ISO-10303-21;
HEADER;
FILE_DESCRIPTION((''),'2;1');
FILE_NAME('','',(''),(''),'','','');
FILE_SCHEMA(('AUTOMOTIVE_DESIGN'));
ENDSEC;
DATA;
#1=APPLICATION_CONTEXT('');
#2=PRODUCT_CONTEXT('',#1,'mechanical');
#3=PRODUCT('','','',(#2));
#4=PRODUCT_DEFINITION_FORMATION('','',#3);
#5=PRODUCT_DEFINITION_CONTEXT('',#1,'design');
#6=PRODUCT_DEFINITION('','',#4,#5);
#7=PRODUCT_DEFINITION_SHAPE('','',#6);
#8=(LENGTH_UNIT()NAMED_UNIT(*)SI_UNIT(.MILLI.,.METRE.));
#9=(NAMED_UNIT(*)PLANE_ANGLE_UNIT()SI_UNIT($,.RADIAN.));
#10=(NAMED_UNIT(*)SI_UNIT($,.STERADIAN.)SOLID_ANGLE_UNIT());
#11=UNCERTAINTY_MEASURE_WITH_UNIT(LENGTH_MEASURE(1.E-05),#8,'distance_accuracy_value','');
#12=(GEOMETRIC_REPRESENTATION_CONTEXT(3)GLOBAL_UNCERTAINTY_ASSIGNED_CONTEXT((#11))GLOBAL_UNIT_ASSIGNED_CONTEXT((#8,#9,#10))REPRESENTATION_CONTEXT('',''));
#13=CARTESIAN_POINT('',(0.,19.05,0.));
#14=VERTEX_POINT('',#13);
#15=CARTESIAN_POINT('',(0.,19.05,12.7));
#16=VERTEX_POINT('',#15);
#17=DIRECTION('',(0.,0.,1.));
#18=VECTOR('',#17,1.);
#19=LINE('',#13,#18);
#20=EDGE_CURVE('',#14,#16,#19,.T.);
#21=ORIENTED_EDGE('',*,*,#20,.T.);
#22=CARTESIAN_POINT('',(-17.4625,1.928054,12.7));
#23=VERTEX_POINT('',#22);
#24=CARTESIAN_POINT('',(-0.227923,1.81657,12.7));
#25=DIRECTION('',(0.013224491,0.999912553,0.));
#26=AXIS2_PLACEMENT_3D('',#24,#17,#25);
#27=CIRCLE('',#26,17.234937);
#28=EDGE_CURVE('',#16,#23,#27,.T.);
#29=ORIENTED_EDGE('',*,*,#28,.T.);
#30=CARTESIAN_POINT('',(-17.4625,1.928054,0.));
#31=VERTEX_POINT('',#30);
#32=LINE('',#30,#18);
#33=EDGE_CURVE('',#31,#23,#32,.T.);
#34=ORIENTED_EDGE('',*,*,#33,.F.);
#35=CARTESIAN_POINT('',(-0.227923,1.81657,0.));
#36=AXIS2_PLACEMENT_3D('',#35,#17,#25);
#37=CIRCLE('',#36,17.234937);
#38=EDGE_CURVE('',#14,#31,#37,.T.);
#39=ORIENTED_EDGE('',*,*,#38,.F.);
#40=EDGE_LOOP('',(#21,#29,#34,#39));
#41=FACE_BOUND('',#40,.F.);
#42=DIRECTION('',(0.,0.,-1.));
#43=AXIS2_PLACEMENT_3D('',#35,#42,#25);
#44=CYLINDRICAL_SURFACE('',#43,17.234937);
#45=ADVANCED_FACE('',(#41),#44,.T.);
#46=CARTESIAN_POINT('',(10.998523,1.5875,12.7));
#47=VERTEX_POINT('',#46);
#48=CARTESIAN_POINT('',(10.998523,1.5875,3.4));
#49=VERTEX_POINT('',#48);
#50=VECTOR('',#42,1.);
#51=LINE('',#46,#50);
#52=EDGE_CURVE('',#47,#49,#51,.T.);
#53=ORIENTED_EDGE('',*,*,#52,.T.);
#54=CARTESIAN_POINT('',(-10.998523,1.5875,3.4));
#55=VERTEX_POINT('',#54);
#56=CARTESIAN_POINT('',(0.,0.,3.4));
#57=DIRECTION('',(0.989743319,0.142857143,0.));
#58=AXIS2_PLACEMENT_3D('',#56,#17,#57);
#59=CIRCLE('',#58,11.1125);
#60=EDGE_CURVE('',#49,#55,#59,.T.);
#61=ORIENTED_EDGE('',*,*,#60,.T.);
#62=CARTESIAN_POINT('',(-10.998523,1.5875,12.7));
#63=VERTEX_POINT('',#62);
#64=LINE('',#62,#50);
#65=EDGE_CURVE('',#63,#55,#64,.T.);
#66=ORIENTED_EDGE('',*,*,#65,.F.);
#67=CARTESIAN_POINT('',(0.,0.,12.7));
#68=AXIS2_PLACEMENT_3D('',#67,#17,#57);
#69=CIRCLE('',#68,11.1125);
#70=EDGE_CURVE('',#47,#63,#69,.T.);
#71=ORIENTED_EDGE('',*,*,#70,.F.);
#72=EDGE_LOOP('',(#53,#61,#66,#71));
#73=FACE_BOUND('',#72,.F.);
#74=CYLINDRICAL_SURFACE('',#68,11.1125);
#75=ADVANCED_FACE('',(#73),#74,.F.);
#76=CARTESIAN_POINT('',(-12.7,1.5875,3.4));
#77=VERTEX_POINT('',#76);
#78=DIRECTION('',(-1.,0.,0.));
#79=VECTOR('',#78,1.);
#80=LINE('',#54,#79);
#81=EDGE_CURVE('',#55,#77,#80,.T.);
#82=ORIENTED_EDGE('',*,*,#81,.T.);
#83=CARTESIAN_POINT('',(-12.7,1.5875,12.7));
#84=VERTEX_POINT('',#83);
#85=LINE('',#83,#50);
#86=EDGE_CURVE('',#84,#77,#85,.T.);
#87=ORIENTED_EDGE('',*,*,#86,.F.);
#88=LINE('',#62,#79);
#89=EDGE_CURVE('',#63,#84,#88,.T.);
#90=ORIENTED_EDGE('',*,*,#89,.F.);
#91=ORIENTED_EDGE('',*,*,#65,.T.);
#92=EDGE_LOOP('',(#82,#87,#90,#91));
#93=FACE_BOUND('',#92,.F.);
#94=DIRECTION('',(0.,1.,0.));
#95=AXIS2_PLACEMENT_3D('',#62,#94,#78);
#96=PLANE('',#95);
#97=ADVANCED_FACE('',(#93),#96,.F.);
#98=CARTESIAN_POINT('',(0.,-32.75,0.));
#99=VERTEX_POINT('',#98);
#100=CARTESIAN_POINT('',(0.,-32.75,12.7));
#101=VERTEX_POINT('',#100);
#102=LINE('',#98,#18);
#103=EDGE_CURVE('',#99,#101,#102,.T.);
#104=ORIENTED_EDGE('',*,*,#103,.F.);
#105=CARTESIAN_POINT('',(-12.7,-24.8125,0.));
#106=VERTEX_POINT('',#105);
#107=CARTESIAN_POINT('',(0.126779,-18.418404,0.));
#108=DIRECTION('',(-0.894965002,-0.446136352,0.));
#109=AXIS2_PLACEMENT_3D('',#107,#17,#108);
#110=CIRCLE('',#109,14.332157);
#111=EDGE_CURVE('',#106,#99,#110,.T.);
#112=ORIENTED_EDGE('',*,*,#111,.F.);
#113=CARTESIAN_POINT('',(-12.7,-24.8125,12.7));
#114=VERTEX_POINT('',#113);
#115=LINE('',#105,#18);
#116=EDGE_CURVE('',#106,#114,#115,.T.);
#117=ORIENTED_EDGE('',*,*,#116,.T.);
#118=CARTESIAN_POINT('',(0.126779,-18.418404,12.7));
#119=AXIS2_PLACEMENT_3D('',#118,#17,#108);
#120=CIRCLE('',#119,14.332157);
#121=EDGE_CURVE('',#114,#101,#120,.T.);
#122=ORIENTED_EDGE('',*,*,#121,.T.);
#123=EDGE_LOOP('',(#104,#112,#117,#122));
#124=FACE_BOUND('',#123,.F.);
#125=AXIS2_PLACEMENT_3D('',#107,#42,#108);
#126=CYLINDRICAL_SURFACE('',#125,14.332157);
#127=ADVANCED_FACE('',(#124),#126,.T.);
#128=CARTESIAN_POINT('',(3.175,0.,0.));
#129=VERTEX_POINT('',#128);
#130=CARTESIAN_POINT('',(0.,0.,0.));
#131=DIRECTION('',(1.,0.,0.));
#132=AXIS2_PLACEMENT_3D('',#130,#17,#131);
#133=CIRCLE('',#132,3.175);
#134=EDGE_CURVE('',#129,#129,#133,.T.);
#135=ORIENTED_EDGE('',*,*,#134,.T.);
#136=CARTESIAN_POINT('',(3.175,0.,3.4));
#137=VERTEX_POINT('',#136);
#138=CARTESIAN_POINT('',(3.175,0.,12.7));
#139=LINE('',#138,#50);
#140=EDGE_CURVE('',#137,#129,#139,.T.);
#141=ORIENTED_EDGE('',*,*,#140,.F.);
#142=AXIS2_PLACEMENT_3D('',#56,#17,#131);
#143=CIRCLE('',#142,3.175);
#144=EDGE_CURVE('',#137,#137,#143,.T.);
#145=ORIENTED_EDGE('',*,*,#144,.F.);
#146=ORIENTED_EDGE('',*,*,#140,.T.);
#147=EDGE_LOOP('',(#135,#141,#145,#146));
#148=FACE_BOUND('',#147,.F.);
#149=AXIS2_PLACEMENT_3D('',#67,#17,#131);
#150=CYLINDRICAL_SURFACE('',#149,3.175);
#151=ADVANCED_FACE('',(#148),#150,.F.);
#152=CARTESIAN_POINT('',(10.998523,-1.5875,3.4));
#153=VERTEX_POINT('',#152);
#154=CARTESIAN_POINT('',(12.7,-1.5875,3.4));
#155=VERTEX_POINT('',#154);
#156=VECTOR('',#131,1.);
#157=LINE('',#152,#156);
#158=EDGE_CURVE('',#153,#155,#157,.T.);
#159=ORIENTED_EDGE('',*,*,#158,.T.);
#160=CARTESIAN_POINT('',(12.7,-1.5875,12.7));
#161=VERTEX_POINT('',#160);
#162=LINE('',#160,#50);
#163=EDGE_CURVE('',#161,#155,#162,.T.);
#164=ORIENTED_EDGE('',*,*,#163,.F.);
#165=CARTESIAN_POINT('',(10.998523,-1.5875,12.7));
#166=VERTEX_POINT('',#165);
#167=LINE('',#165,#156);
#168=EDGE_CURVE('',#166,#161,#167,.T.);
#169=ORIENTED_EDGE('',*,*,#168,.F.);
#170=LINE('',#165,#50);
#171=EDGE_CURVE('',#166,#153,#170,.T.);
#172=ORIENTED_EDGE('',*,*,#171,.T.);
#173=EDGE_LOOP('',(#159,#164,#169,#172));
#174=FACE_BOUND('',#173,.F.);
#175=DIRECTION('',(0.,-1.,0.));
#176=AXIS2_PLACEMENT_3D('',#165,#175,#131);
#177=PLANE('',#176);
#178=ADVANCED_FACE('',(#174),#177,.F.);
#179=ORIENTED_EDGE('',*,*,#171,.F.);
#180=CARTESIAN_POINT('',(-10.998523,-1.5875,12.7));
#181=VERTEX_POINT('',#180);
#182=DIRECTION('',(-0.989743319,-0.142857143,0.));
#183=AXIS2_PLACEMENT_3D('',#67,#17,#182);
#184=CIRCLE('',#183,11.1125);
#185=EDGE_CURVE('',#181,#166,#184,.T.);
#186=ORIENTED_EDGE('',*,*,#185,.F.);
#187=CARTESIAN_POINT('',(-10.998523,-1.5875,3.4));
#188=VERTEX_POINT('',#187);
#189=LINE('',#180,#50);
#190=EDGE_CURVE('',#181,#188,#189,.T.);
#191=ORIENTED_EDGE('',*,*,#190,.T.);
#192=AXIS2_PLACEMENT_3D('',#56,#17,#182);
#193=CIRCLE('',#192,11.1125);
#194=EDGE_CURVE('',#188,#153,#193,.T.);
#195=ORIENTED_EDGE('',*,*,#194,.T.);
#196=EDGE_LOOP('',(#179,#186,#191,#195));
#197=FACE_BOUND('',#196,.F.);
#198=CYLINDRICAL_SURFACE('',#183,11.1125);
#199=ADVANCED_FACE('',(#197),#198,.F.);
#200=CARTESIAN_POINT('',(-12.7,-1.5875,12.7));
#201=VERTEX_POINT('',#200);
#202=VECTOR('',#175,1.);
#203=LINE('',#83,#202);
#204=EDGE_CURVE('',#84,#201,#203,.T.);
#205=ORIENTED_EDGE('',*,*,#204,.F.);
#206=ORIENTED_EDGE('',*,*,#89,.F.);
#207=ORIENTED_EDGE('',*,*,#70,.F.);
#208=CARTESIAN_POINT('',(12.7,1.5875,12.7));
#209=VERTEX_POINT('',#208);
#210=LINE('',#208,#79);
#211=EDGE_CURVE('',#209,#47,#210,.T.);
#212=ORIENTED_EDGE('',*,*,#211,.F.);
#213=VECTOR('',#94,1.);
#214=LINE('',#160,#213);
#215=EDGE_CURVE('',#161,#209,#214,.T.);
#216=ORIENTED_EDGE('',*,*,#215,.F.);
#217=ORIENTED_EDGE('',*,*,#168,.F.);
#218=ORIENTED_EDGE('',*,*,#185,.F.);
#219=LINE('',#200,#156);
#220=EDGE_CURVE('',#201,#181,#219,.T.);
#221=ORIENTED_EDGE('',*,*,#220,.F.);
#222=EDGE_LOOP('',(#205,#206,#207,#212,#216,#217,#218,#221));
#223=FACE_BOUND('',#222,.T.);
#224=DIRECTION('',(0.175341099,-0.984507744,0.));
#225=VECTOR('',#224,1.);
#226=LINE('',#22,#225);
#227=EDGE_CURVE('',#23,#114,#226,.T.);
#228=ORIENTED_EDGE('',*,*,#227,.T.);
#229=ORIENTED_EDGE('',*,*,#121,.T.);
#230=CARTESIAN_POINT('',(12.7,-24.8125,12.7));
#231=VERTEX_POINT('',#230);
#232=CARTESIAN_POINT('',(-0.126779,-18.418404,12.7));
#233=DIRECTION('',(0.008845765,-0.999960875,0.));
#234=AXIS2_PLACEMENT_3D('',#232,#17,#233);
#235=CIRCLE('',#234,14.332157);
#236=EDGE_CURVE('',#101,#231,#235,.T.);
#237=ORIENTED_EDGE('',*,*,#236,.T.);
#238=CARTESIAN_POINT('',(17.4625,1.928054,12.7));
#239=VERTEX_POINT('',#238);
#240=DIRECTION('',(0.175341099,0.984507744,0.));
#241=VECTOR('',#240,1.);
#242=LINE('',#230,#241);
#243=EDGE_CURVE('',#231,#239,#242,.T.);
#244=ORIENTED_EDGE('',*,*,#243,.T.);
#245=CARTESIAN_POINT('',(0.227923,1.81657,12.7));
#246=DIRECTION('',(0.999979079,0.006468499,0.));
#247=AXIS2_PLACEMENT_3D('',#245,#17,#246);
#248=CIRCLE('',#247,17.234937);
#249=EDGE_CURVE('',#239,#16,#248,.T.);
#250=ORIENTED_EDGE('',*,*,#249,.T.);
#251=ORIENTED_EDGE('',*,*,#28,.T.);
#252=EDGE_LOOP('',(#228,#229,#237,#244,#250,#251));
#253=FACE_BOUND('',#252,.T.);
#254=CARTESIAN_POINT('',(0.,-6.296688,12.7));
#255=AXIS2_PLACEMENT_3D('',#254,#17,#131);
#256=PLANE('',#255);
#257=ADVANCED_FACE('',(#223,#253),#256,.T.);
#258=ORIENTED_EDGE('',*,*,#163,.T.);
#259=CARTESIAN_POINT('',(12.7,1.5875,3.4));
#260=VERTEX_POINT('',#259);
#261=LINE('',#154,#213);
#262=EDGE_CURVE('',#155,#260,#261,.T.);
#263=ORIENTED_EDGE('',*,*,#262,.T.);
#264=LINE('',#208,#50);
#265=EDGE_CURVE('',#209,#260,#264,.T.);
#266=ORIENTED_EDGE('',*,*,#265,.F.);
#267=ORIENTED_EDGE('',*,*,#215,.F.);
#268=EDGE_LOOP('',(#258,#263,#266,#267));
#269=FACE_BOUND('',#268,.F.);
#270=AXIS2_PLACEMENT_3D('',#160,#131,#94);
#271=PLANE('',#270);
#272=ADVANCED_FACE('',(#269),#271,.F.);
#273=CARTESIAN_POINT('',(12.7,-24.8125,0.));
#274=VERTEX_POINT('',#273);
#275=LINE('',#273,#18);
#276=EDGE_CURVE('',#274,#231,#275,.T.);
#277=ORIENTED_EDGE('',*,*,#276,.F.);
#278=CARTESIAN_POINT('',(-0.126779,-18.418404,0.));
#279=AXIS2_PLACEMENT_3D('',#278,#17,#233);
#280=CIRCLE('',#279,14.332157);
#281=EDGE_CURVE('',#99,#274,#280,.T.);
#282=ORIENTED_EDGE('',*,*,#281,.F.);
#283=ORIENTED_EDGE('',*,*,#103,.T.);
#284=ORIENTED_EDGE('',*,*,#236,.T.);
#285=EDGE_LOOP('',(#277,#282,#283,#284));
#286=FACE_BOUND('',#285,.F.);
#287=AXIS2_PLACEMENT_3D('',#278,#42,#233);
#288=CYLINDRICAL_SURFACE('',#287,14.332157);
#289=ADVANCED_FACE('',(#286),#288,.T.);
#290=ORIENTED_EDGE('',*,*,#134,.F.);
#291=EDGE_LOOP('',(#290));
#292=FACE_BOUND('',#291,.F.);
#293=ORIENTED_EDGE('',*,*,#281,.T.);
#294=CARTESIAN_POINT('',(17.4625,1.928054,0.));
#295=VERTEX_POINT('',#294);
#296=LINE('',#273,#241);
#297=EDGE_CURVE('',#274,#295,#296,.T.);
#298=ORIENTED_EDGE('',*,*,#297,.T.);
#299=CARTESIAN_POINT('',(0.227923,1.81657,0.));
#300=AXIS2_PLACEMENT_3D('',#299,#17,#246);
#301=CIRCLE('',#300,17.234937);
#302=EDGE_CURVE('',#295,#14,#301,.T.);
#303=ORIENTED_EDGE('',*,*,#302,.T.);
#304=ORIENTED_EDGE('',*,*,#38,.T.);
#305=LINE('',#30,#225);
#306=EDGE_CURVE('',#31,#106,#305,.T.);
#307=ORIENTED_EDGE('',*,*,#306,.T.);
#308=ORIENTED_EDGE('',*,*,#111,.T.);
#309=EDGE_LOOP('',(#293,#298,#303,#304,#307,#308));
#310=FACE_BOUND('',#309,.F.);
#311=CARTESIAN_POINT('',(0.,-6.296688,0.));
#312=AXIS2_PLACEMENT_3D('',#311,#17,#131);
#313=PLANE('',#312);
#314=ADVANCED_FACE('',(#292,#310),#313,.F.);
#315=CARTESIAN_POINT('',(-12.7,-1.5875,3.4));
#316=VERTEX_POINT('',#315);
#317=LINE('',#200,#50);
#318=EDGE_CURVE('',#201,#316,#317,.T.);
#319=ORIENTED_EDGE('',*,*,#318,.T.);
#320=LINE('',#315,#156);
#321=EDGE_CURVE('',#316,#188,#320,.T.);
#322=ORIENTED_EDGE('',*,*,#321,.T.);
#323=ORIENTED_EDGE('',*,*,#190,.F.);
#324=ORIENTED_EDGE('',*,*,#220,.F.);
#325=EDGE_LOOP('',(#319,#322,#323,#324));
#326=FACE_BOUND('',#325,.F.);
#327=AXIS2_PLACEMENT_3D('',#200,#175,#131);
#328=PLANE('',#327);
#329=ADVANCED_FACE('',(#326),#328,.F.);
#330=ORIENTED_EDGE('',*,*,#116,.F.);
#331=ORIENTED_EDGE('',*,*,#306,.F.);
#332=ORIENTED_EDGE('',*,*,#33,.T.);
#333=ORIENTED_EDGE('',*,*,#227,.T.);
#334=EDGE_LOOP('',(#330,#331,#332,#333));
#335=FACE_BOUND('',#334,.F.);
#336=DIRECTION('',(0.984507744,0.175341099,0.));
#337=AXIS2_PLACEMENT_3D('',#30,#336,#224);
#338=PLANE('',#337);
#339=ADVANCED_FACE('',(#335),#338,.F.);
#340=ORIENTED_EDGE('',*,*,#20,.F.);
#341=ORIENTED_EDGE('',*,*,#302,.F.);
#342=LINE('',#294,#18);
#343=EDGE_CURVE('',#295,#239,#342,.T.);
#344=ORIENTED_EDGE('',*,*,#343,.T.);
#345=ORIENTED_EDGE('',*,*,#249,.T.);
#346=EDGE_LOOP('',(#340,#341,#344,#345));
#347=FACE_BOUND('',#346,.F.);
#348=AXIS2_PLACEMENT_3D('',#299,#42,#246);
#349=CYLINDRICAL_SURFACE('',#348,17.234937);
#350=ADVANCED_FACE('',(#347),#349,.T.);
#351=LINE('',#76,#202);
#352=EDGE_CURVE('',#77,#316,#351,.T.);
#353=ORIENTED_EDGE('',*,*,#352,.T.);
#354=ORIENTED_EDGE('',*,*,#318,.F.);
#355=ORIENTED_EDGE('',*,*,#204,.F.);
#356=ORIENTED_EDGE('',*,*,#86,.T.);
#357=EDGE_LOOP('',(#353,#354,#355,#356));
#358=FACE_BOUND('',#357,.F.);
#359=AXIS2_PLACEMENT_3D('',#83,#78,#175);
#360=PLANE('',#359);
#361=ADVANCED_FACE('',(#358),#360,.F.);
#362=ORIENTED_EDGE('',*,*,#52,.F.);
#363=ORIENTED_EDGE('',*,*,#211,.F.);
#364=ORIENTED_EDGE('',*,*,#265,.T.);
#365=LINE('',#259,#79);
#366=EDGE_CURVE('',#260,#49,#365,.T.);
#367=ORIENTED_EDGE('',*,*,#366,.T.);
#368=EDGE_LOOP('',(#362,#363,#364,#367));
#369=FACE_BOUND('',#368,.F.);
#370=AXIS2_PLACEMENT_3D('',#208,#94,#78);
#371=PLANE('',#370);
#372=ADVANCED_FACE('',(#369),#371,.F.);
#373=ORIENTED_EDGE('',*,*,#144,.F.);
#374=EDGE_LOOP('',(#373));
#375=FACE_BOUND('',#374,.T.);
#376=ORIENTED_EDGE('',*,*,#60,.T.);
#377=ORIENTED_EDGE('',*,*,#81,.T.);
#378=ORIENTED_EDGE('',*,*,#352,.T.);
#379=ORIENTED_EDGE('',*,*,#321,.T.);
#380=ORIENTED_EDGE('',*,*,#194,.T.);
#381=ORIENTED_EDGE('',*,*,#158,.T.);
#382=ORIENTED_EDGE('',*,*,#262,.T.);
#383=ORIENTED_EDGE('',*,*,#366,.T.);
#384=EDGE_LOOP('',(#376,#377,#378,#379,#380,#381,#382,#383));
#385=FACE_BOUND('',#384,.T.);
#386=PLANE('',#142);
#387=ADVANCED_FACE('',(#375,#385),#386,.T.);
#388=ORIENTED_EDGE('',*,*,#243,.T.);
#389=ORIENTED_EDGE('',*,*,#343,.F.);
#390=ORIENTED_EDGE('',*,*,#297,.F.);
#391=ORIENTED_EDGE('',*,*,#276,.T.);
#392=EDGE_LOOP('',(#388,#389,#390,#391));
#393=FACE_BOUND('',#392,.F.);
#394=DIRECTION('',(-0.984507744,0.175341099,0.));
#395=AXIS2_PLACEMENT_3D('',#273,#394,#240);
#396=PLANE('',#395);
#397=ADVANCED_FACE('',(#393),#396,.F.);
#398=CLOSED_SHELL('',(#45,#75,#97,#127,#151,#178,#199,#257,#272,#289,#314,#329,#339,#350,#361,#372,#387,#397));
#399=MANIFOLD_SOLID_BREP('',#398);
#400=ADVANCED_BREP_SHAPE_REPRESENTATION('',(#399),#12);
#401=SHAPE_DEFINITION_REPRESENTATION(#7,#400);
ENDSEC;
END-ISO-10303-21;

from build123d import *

# Parameters (mm, degrees)
F1_DEPTH = 12.7
F2_R     = 3.175
F3_DEPTH = 9.3
F4_DEPTH = 25.4


# Not quite as in the source:
# - ends of sketch curves that miss each other by under 0.0002 mm in the source are joined


with BuildPart() as f1:
    # F0 (on Top) → F1 (new body)
    with BuildSketch(Plane.XY):
        with BuildLine():
            ThreePointArc((0, -32.75), (7.4692491087, -30.572048574), (12.7, -24.8125))
            Line((12.7, -24.8125), (17.4625, 1.9280540291))
            ThreePointArc((17.4625, 1.9280540291), (12.2942741687, 14.1229194267), (0, 19.05))
            ThreePointArc((0, 19.05), (-12.2942741687, 14.1229194267), (-17.4625, 1.9280540291))
            Line((-17.4625, 1.9280540291), (-12.7, -24.8125))
            ThreePointArc((-12.7, -24.8125), (-7.4692491087, -30.572048574), (0, -32.75))
        make_face()
    extrude(amount=F1_DEPTH)

    # F2 (on face) → F3 (cut)
    with BuildSketch(Plane.XY.offset(12.7)):
        with BuildLine():
            Line((12.7, 1.5875), (10.9985226281, 1.5875))
            ThreePointArc((10.9985226281, 1.5875), (0, 11.1125), (-10.9985226281, 1.5875))
            Line((-10.9985226281, 1.5875), (-12.7, 1.5875))
            Line((-12.7, 1.5875), (-12.7, 0))
            Line((-12.7, 0), (-12.7, -1.5875))
            Line((-12.7, -1.5875), (-10.9985226281, -1.5875))
            ThreePointArc((-10.9985226281, -1.5875), (0, -11.1125), (10.9985226281, -1.5875))
            Line((10.9985226281, -1.5875), (12.7, -1.5875))
            Line((12.7, -1.5875), (12.7, 0))
            Line((12.7, 0), (12.7, 1.5875))
        make_face()
        Circle(F2_R, mode=Mode.SUBTRACT)
    extrude(amount=-F3_DEPTH, mode=Mode.SUBTRACT)

    # F4 (cut): a face of the model
    f4_faces = [f1.faces().sort_by_distance(p)[0] for p in [
        (0, 0, 12.7),
    ]]
    extrude(f4_faces, amount=-F4_DEPTH, mode=Mode.SUBTRACT)


solid = f1.part
